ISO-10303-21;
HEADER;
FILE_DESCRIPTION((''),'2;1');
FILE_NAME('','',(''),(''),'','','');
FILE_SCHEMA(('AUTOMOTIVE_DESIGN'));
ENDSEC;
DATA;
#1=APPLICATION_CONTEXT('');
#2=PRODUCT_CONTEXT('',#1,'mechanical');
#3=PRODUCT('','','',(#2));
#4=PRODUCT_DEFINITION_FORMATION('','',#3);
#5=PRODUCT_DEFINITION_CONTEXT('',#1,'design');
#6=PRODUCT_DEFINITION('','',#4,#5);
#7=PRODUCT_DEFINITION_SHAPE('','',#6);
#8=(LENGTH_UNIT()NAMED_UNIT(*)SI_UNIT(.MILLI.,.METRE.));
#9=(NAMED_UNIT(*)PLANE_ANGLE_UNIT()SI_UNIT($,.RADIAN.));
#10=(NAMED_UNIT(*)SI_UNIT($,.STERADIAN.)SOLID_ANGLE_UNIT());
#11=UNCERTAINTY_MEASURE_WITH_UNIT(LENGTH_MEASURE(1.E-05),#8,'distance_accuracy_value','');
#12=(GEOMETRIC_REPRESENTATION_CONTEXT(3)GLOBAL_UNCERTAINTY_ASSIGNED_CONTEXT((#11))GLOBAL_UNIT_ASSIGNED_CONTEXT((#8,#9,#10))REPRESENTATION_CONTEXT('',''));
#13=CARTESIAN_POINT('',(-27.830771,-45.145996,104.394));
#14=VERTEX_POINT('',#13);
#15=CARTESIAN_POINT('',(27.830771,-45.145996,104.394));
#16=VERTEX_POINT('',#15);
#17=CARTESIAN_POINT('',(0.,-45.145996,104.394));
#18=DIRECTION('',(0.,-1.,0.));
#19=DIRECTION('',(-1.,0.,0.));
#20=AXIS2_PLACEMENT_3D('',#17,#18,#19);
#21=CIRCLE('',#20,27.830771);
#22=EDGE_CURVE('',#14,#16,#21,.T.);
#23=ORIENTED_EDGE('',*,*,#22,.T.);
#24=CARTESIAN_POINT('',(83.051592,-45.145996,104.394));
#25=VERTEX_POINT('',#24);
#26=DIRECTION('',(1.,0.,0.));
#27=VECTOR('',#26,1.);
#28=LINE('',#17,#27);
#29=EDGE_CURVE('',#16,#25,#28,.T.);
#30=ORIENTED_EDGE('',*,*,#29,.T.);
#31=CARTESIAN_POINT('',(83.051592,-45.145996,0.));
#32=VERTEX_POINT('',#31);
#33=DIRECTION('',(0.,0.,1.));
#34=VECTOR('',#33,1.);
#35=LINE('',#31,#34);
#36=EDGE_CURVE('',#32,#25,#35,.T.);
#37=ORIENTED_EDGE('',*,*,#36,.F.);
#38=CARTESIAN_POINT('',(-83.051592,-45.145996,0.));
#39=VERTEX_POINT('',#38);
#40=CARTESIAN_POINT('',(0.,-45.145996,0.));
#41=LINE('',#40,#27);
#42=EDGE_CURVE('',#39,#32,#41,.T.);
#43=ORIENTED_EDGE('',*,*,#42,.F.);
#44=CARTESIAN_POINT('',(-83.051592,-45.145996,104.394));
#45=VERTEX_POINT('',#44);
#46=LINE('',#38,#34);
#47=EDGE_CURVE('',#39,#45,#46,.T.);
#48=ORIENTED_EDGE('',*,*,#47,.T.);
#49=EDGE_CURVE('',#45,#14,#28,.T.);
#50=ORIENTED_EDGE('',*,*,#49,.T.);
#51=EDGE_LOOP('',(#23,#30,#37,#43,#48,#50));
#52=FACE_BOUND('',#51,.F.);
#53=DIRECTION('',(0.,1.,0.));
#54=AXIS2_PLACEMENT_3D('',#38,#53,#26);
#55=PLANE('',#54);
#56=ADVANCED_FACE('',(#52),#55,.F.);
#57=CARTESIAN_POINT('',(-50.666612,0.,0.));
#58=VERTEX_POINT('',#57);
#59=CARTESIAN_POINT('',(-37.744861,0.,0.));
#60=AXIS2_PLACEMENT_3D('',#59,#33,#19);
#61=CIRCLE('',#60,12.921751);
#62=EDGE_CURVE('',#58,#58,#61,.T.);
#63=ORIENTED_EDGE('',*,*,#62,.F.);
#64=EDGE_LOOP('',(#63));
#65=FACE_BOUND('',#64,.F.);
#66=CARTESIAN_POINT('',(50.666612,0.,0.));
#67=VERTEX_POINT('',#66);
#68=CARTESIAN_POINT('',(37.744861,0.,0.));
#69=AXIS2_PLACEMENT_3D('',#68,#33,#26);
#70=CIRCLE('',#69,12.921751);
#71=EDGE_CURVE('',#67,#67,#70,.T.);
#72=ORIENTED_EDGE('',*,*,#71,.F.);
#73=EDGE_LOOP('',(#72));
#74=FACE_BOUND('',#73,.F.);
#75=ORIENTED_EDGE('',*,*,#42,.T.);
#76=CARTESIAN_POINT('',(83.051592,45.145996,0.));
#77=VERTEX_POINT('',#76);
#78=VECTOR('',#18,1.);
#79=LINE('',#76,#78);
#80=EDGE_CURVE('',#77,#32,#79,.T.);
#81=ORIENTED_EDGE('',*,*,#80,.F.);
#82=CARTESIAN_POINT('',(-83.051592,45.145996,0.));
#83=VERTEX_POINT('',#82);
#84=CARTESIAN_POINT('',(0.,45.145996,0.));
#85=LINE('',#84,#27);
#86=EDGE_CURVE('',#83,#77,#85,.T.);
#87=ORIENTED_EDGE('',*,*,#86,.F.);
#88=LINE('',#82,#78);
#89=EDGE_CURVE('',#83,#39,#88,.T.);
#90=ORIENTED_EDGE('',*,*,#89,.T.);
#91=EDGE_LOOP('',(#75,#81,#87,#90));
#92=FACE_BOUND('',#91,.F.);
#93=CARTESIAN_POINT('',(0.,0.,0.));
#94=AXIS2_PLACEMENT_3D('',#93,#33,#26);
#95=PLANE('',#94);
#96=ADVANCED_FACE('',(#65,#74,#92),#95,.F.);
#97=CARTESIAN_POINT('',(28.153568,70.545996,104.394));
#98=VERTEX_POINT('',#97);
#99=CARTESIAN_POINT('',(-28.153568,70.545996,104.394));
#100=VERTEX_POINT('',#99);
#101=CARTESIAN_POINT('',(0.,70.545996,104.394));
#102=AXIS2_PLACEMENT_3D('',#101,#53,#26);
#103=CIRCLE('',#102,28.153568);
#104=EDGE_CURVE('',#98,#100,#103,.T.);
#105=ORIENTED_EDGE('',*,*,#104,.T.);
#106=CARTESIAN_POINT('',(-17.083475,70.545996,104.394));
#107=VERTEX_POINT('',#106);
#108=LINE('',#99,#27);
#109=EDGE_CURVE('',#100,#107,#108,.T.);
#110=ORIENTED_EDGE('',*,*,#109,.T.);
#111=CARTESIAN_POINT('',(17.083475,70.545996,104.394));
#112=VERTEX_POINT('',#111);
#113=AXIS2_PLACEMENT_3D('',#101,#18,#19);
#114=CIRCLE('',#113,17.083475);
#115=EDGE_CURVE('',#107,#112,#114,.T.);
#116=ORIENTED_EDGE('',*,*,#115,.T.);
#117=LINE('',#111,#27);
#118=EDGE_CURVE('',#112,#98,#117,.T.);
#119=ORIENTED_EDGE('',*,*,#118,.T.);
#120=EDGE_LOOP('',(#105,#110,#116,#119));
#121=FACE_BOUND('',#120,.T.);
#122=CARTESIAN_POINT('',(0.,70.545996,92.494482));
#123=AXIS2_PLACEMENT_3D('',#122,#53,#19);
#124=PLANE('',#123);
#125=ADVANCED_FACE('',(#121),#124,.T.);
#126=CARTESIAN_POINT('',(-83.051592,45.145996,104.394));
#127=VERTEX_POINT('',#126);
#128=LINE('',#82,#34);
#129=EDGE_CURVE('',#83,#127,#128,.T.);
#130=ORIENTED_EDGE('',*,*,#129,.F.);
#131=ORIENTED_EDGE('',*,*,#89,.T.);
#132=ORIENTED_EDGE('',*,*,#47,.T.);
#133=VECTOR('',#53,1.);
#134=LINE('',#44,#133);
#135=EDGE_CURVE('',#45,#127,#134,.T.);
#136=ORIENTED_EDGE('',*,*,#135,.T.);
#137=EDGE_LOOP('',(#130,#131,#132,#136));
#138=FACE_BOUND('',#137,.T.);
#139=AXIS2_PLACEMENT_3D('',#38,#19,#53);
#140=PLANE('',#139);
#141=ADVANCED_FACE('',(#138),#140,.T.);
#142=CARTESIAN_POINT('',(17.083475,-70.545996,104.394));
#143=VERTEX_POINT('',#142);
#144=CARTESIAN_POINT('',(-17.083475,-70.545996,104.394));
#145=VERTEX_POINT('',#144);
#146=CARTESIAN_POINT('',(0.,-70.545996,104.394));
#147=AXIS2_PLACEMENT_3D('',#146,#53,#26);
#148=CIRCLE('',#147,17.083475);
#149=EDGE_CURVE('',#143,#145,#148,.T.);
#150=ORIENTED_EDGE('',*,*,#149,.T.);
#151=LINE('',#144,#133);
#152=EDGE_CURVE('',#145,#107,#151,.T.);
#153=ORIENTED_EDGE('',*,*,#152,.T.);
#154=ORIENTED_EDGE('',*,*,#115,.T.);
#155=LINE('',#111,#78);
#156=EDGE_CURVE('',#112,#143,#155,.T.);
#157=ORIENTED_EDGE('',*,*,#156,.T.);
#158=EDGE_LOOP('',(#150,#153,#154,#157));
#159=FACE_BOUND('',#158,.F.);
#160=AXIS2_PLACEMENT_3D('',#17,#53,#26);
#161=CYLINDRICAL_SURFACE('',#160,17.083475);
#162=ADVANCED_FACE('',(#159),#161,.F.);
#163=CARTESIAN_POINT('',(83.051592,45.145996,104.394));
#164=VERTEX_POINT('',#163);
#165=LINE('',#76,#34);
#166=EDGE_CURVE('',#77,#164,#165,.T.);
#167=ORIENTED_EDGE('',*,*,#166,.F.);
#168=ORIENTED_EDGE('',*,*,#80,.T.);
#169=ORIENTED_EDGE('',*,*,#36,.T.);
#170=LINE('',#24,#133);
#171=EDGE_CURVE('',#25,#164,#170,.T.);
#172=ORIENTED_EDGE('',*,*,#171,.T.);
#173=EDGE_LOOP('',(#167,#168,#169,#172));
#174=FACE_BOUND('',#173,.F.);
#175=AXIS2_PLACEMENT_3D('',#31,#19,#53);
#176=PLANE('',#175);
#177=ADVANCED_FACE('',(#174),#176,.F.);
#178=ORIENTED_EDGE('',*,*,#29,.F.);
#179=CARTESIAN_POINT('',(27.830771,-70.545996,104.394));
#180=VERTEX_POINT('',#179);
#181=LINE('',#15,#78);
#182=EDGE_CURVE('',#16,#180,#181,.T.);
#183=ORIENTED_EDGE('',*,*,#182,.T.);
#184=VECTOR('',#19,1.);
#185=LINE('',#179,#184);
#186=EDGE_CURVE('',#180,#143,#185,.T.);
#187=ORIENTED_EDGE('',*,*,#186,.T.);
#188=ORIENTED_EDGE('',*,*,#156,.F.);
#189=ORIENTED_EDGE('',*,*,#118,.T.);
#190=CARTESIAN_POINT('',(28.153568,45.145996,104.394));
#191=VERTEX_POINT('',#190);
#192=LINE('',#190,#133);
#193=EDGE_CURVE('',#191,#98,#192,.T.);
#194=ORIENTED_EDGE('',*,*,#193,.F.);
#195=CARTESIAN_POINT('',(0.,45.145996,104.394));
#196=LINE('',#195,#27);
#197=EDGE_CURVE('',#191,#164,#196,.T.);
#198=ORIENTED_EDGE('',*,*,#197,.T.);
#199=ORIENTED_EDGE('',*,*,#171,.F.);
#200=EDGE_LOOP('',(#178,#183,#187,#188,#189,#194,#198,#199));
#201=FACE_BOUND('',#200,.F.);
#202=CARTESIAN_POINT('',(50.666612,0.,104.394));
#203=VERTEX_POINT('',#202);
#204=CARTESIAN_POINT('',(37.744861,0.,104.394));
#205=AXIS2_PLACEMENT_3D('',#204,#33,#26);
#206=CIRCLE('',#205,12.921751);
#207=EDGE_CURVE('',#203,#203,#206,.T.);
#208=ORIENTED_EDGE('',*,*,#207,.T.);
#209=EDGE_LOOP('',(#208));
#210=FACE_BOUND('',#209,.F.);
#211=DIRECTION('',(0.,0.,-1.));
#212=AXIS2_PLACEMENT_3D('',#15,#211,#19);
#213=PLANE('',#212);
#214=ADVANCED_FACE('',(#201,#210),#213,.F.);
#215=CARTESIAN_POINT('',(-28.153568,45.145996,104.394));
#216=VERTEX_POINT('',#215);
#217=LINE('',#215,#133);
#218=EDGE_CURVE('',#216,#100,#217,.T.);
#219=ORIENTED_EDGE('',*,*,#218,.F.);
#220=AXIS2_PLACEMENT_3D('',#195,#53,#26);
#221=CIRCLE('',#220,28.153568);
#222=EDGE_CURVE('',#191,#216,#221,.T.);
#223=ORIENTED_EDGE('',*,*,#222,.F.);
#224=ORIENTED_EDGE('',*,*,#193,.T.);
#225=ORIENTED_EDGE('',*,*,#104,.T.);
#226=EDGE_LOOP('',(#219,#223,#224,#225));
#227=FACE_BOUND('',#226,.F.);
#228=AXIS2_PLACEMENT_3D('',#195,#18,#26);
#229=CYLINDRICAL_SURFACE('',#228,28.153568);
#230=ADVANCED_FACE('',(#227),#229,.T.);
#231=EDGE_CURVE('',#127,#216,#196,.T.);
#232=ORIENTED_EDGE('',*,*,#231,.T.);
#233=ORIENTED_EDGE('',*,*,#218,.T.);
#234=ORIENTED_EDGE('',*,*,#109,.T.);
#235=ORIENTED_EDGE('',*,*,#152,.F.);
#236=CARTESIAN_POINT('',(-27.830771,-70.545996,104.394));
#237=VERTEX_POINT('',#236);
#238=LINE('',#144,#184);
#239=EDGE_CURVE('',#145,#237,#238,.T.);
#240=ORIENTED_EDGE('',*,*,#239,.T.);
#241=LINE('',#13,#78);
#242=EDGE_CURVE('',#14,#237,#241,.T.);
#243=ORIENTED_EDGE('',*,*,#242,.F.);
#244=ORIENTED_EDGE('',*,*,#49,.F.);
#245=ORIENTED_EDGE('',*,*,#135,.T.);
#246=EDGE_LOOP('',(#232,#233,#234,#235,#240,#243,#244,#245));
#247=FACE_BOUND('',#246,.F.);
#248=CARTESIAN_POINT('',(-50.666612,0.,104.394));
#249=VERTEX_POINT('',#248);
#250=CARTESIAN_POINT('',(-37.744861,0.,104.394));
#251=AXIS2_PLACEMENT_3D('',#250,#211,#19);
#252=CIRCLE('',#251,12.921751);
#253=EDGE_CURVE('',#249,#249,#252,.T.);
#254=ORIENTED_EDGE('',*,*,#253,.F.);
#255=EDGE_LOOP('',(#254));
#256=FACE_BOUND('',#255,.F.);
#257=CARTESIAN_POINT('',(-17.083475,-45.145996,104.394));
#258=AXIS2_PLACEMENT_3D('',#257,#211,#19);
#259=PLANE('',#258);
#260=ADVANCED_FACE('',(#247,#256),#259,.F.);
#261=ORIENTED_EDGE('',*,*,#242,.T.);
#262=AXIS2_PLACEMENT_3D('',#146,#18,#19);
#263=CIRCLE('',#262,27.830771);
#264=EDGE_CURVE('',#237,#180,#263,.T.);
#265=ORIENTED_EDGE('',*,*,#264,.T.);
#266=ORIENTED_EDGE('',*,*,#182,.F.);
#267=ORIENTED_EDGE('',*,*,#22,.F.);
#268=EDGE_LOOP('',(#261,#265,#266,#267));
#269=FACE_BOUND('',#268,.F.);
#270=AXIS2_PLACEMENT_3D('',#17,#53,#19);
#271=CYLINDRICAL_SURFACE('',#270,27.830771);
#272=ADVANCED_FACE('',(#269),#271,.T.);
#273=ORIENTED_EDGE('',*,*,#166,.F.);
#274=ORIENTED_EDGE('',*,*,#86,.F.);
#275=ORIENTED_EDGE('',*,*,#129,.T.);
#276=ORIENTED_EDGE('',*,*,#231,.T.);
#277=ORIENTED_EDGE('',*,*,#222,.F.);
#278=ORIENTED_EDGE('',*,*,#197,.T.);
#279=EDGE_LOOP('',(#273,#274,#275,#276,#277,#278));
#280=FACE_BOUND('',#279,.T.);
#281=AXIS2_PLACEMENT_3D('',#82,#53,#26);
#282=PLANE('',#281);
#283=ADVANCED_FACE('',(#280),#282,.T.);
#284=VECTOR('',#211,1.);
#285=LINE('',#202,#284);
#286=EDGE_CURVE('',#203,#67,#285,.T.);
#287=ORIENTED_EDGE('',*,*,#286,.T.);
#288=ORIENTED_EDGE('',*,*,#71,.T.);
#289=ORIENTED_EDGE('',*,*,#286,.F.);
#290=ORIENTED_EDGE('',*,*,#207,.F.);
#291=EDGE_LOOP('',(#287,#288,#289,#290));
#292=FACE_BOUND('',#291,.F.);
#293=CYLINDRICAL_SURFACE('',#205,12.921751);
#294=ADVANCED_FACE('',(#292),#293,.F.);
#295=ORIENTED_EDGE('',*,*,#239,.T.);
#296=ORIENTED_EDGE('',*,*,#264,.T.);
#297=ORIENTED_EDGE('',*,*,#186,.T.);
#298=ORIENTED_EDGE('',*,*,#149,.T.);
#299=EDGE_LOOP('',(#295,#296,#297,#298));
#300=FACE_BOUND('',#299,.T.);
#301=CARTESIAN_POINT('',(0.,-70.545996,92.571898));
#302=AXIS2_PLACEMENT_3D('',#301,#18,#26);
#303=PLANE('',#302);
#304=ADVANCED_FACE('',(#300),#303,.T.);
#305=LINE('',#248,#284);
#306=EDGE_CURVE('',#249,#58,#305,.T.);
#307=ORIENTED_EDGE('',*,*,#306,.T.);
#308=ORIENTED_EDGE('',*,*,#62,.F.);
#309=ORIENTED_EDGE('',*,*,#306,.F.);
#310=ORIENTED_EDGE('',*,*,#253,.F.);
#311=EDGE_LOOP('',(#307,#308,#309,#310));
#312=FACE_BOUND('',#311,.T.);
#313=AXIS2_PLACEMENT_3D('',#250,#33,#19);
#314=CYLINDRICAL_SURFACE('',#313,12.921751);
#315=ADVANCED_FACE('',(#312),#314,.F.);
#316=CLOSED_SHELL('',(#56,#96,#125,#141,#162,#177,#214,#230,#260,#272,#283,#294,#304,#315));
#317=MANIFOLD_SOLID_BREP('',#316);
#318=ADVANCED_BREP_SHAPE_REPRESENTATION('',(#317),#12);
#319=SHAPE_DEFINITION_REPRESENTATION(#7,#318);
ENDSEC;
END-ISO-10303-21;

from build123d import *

# Parameters (mm, degrees)
F0_W       = 166.1031842232
F0_H       = 90.2919918299
F1_DEPTH   = 104.394
F1_FACE1_W = 166.1031842232
F1_FACE1_H = 104.394
F3_DEPTH   = 25.4
F5_DEPTH   = 306.324
F7_DEPTH   = 25.4
F8_R       = 12.9217505793
F9_DEPTH   = 104.395


# Not quite as in the source:
# - a pattern or mirror of a feature is missing from the dataset's text; its kind, count and spacing are read off the source's solid


with BuildPart() as f1:
    # F0 (on Top) → F1 (new body)
    with BuildSketch(Plane.XY):
        Rectangle(F0_W, F0_H)
    extrude(amount=F1_DEPTH)

    # F2 (on face) + F1_face1 (on face) → F3 (join)
    with BuildSketch(Plane(origin=(0, 45.1459959149, 0), x_dir=(-1, 0, 0), z_dir=(0, 1, 0))):
        with BuildLine():
            Line((28.1535676802, 104.394), (17.0834749636, 104.394))
            ThreePointArc((17.0834749636, 104.394), (0, 87.3105250364), (-17.0834749636, 104.394))
            Line((-17.0834749636, 104.394), (-28.1535676802, 104.394))
            ThreePointArc((-28.1535676802, 104.394), (0, 76.2404323198), (28.1535676802, 104.394))
        make_face()
    with BuildSketch(Plane(origin=(0, -45.1459959149, 52.197), x_dir=(1, 0, 0), z_dir=(0, -1, 0))):
        Rectangle(F1_FACE1_W, F1_FACE1_H)
    extrude(amount=F3_DEPTH, dir=(0, 1, 0))

    # F4 (on face) → F5 (cut)
    with BuildSketch(Plane(origin=(0, 45.1459959149, 0), x_dir=(-1, 0, 0), z_dir=(0, 1, 0))):
        with BuildLine():
            Line((17.0834749636, 104.394), (-17.0834749636, 104.394))
            ThreePointArc((-17.0834749636, 104.394), (0, 87.3105250364), (17.0834749636, 104.394))
        make_face()
    extrude(amount=-F5_DEPTH, mode=Mode.SUBTRACT)

    # F6 (on face) → F7 (join)
    with BuildSketch(Plane.XZ.offset(45.1459959149)):
        with BuildLine():
            ThreePointArc((-27.8307711085, 104.394), (0, 76.5632288915), (27.8307711085, 104.394))
            Line((27.8307711085, 104.394), (17.0834749636, 104.394))
            ThreePointArc((17.0834749636, 104.394), (0, 87.3105250364), (-17.0834749636, 104.394))
            Line((-17.0834749636, 104.394), (-27.8307711085, 104.394))
        make_face()
    extrude(amount=F7_DEPTH)

    # F8 (on face) → F9 (cut, through all)
    with BuildSketch(Plane.XY.offset(104.394)):
        with Locations((37.7448610961, 0)):
            Circle(F8_R)
    f9 = extrude(amount=-F9_DEPTH, mode=Mode.SUBTRACT)

    # F9_copies: F9 across plane
    add(f9.mirror(Plane(origin=(0, 0, 0), x_dir=(0, 0, -1), z_dir=(-1, 0, 0))), mode=Mode.SUBTRACT)


solid = f1.part
